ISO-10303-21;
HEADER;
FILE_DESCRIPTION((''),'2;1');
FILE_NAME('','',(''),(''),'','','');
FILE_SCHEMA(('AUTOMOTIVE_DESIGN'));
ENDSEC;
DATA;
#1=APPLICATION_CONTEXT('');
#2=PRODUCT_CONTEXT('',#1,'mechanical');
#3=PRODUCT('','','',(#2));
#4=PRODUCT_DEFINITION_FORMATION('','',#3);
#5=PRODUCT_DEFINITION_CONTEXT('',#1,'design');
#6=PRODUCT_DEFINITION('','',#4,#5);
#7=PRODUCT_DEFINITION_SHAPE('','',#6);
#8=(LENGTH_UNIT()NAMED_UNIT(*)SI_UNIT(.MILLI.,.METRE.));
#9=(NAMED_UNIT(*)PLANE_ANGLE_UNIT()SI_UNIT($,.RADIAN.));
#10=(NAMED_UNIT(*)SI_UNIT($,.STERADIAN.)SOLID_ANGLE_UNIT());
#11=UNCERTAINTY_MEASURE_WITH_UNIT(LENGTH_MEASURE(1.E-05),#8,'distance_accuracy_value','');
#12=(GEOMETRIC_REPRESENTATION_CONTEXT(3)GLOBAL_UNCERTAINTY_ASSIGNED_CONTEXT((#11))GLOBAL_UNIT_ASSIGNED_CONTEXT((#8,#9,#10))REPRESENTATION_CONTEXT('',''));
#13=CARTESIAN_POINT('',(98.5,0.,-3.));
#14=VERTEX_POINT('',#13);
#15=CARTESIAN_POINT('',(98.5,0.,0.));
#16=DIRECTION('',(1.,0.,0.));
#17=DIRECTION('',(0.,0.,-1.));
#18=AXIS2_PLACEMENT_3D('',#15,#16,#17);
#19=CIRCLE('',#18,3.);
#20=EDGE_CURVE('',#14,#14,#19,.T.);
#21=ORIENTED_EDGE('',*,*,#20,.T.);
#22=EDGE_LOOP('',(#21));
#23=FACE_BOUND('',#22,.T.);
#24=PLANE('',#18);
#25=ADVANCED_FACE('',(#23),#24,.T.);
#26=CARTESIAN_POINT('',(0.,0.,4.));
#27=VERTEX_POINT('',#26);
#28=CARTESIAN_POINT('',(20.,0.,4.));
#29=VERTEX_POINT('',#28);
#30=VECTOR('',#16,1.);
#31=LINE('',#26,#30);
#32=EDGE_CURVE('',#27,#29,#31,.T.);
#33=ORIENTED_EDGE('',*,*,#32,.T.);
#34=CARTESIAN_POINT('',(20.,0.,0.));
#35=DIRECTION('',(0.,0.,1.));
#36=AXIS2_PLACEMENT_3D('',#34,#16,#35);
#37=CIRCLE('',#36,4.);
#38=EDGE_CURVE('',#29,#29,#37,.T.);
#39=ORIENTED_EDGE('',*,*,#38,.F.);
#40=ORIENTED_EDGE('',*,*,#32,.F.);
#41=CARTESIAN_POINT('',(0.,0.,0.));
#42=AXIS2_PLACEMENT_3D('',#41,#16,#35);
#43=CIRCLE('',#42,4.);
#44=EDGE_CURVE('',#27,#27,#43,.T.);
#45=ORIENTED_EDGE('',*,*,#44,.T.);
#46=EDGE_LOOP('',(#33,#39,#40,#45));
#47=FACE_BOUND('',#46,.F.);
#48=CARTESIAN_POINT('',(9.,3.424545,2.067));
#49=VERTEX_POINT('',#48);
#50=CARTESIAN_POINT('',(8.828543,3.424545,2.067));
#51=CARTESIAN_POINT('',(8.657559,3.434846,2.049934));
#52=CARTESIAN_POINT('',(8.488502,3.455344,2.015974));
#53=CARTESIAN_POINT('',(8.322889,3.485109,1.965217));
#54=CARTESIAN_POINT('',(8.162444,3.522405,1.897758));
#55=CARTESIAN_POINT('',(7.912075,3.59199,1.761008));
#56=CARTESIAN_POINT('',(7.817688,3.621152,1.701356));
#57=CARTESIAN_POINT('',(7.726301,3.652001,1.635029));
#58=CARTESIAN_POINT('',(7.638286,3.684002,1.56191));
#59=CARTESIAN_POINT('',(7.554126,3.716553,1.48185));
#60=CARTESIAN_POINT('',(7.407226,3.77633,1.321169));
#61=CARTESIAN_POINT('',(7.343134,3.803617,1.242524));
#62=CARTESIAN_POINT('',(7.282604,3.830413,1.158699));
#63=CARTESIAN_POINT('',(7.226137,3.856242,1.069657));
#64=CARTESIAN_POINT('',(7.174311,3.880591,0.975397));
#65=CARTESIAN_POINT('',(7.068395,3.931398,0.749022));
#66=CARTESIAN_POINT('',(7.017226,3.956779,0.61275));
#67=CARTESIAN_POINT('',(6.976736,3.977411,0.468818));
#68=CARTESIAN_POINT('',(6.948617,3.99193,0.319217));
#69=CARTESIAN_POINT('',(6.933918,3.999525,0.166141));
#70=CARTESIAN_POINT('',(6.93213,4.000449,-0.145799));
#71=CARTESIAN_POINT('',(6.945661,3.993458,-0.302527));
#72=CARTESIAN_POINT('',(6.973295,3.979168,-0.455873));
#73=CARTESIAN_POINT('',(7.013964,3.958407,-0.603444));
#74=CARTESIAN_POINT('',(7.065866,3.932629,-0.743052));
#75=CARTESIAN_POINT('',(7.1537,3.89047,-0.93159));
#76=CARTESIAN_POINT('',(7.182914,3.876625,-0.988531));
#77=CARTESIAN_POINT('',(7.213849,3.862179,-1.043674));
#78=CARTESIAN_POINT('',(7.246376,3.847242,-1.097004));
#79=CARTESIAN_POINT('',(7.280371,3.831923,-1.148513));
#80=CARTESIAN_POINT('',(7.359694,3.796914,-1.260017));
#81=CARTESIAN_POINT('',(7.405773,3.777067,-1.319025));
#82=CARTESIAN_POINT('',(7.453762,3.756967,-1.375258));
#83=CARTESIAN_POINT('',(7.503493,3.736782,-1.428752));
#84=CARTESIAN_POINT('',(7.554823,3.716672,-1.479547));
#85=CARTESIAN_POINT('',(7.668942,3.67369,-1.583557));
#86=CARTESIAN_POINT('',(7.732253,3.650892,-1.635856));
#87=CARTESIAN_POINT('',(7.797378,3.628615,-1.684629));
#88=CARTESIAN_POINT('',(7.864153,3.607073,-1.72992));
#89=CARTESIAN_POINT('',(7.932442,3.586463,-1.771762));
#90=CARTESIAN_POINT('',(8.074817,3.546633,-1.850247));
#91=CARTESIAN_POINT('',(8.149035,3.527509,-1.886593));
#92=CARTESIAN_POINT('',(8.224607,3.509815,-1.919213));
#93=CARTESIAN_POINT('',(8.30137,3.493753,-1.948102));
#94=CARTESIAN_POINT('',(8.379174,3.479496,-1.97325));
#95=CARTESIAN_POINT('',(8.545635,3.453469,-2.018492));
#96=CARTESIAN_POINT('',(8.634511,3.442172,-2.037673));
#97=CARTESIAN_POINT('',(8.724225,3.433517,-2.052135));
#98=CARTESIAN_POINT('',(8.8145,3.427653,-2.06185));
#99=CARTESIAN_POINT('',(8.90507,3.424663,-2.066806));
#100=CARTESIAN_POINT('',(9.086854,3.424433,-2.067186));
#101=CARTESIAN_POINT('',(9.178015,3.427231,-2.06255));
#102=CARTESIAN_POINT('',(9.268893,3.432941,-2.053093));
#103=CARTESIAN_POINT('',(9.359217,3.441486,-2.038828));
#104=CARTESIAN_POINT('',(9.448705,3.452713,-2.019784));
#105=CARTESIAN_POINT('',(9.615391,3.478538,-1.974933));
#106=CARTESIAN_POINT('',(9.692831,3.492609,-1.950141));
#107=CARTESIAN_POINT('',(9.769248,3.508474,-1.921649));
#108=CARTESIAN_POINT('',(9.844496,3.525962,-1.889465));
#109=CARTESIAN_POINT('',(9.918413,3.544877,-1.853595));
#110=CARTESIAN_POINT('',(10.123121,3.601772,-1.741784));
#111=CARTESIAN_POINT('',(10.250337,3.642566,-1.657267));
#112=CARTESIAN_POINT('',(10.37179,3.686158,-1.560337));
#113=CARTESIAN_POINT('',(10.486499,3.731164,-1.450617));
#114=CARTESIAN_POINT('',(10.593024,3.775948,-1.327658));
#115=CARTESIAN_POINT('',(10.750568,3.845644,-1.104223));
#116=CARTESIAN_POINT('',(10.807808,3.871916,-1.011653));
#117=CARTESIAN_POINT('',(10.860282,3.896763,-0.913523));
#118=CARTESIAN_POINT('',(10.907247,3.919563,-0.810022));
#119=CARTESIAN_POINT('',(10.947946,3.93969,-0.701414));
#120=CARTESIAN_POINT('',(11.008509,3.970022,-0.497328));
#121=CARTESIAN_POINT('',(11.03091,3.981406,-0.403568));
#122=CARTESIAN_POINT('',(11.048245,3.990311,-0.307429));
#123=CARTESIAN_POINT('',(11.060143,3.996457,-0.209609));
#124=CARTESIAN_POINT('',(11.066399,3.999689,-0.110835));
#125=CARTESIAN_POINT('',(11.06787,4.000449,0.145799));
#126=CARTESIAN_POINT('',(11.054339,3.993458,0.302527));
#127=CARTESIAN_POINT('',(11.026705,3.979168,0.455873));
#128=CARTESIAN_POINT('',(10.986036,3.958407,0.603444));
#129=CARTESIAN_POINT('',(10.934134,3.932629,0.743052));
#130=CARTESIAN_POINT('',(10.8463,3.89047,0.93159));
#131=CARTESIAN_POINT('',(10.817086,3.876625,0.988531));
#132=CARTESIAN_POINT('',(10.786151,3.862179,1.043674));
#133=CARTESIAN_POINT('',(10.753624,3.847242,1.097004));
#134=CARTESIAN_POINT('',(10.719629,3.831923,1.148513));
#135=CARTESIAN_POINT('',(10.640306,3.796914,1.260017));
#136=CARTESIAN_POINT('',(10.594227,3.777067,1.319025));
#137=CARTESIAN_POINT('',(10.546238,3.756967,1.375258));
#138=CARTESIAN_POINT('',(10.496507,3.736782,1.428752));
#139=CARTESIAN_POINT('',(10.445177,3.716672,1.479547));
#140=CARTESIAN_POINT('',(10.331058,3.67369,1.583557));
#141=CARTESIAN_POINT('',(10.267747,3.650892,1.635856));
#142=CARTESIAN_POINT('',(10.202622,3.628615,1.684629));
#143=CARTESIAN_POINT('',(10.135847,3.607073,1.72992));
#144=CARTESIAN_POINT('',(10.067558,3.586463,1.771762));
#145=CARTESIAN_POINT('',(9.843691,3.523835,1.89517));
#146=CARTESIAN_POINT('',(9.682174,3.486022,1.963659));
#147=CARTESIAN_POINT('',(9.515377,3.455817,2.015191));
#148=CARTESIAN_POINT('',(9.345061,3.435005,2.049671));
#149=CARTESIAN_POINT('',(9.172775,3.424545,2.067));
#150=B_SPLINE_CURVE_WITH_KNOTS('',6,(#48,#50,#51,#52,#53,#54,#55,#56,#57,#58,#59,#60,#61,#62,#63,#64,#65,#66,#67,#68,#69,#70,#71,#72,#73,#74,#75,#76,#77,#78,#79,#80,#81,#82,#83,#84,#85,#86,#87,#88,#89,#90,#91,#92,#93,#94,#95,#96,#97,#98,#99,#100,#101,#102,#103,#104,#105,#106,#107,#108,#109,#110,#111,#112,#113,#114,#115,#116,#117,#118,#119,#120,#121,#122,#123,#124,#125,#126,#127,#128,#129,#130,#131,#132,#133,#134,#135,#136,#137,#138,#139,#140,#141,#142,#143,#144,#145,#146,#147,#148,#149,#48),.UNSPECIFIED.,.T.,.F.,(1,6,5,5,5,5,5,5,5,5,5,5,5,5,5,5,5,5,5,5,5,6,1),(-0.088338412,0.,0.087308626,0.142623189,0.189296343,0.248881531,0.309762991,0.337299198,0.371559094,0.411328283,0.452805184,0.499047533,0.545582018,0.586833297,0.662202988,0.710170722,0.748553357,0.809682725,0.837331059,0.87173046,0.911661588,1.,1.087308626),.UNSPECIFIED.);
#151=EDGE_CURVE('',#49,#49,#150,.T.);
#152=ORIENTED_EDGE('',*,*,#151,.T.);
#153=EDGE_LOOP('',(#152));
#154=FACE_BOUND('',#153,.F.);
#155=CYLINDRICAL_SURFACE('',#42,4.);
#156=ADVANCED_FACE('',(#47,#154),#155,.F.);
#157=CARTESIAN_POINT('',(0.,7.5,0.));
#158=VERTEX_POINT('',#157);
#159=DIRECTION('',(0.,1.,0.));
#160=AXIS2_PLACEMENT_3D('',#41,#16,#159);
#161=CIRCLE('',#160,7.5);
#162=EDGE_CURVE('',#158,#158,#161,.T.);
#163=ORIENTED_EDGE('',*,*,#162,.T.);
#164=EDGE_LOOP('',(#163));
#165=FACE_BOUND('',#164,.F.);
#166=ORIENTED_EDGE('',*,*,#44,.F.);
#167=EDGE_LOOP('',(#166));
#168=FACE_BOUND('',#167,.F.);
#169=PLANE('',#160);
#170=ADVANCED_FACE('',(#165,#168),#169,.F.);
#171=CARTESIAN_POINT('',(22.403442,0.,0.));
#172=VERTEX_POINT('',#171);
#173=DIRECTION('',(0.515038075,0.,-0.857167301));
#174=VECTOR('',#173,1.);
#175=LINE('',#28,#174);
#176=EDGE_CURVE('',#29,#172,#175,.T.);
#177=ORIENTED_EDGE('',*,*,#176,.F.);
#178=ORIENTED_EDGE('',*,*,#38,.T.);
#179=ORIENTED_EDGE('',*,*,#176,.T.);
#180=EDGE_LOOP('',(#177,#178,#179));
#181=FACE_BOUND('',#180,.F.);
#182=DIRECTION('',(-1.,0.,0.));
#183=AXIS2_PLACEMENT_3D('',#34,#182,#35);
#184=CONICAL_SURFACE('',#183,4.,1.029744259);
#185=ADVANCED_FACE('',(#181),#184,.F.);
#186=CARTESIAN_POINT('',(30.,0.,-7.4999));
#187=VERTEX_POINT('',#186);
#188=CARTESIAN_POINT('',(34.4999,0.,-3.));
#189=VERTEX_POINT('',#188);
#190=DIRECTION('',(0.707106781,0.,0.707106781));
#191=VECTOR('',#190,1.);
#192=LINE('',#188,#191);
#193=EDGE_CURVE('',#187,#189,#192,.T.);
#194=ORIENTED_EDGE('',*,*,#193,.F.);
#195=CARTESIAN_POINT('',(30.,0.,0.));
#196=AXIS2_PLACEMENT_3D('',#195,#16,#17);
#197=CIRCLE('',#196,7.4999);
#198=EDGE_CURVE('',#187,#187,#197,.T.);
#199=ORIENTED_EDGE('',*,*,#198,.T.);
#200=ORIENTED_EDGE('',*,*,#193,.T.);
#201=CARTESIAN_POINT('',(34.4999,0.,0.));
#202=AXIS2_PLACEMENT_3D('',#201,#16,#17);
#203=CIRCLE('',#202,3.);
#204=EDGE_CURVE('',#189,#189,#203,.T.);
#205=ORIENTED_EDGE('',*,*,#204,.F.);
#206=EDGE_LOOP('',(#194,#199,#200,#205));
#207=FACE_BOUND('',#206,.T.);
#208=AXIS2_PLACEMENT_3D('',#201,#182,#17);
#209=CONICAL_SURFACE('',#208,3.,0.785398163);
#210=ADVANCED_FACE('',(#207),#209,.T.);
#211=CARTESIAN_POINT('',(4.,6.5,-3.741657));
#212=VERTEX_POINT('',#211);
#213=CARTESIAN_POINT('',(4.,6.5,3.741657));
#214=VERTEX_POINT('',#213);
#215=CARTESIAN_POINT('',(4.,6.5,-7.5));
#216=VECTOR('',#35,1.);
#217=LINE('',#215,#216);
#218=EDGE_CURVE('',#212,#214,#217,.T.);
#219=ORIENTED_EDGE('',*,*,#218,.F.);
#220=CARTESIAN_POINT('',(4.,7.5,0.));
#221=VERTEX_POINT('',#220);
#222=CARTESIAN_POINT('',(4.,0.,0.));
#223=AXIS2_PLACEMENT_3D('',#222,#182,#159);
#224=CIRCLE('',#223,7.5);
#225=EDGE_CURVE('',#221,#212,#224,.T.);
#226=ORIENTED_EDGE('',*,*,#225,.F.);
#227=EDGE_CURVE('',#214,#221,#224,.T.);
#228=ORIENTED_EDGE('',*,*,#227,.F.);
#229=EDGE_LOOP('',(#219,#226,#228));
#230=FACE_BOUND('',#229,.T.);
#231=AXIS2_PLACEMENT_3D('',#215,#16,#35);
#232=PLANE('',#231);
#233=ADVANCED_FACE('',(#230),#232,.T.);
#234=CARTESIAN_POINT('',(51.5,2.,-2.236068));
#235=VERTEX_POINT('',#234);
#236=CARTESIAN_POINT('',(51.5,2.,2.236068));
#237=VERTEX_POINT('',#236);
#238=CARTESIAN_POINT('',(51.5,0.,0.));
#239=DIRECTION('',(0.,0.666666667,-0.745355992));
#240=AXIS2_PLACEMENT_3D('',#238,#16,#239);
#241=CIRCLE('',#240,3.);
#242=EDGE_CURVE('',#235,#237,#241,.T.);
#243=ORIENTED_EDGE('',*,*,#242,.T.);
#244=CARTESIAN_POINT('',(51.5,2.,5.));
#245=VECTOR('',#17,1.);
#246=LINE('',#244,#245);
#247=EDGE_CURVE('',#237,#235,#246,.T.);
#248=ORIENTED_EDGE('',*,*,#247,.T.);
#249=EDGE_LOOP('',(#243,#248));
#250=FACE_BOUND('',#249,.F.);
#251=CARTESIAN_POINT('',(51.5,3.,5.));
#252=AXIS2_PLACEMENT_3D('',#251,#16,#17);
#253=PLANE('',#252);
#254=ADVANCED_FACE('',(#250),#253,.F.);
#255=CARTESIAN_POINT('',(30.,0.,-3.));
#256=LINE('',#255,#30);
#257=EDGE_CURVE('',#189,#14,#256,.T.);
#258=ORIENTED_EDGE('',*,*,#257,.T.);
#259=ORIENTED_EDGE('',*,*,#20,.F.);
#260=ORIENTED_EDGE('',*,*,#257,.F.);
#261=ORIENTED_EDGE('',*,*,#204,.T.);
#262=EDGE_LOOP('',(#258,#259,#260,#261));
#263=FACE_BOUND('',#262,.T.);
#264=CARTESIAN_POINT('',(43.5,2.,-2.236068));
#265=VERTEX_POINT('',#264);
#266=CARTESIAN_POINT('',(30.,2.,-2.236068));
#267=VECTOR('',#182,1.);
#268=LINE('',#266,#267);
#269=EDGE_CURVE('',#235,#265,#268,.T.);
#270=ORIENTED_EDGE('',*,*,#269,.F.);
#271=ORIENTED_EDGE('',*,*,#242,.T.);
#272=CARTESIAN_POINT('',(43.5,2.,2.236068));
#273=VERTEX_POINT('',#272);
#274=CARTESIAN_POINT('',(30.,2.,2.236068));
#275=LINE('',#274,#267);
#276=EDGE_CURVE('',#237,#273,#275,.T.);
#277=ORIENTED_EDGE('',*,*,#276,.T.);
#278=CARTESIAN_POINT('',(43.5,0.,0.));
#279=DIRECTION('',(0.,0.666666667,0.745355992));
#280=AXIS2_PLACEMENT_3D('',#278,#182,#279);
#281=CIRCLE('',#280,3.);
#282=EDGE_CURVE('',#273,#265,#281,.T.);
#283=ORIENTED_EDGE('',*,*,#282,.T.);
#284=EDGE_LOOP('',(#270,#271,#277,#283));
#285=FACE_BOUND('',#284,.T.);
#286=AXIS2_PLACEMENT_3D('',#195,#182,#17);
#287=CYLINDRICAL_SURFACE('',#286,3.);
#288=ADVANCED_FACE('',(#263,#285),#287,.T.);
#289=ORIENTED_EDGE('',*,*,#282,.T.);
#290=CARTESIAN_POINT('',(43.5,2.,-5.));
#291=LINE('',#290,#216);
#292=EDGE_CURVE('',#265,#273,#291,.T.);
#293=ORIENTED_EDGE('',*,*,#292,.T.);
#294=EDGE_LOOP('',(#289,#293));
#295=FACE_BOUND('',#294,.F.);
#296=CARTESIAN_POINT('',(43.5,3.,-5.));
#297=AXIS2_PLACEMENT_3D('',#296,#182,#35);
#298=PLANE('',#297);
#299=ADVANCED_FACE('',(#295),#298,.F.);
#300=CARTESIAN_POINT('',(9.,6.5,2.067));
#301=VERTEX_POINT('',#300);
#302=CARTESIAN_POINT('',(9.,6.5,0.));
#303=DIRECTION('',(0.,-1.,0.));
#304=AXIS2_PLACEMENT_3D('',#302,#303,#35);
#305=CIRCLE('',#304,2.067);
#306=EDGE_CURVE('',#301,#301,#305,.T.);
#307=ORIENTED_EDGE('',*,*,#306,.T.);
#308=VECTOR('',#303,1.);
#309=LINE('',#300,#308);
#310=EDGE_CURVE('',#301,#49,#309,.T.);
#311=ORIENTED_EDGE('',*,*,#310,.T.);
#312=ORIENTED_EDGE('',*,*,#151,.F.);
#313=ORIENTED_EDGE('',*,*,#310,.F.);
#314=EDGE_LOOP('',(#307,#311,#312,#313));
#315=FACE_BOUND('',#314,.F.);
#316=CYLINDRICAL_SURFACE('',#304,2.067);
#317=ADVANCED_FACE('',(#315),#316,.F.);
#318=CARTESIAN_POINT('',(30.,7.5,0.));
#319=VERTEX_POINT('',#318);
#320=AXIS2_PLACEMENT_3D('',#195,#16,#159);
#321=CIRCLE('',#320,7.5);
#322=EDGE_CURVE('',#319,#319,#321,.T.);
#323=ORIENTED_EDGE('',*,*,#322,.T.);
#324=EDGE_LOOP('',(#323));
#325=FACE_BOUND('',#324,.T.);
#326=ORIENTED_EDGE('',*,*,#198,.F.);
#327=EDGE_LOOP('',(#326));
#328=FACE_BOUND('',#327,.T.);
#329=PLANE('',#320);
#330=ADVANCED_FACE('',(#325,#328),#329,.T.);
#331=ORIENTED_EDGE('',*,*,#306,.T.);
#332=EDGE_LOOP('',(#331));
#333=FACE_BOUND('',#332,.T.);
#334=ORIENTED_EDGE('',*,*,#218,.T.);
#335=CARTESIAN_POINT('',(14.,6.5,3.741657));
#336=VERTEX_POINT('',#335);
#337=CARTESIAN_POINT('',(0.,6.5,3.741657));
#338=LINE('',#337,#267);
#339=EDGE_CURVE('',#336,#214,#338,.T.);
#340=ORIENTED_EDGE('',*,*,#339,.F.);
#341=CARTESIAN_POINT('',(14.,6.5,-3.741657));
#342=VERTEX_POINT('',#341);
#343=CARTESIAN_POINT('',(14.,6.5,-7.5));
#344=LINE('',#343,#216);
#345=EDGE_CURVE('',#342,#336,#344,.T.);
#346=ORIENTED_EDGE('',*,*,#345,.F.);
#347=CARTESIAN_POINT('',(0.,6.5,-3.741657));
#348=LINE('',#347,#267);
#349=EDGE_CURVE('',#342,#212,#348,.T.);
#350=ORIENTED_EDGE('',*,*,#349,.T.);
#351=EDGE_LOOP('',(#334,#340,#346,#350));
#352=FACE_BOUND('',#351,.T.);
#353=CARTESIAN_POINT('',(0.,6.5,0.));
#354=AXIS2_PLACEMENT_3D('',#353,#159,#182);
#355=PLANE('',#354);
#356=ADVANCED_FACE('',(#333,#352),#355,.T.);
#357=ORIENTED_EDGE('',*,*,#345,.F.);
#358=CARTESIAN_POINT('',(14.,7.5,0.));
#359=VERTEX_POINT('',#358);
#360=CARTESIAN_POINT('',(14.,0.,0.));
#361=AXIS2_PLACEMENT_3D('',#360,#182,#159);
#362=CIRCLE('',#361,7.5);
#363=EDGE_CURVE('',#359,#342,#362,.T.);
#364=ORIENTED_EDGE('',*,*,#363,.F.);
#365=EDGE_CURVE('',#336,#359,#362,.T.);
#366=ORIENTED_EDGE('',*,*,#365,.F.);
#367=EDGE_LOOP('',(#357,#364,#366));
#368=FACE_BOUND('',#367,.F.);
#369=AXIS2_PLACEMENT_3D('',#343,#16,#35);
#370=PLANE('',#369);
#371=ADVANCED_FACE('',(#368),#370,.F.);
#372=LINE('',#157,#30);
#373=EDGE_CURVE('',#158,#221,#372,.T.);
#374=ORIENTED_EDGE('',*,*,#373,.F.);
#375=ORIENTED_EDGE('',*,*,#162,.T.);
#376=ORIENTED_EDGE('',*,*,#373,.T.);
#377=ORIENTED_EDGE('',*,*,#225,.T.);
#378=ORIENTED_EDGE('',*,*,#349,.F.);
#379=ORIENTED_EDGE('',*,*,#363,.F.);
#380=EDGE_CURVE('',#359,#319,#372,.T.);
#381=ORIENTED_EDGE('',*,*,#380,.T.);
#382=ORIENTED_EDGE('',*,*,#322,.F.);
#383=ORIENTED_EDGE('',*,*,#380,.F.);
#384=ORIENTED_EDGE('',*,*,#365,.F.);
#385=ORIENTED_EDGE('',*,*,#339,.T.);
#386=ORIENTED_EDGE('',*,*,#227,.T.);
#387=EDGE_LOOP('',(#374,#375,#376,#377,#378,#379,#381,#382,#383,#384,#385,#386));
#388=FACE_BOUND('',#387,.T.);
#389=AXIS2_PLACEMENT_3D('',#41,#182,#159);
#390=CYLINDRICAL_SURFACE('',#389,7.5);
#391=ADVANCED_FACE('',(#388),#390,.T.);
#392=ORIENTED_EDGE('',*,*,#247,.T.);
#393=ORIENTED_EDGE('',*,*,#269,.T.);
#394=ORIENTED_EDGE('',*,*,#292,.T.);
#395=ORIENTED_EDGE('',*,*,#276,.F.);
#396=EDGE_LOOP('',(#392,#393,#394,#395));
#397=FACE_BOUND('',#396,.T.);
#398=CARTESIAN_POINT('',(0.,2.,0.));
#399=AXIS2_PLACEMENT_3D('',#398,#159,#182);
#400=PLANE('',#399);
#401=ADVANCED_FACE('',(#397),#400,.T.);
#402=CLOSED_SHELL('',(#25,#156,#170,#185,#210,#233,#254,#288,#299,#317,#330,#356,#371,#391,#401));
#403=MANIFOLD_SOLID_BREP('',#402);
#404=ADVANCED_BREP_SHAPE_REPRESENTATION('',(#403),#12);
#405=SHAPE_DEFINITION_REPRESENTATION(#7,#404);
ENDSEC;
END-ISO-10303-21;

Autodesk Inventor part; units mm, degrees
ref_plane "YZ Plane" through (0, 0, 0) normal (1, 0, 0) x (0, 1, 0)
sketch "Skizze1" plane through (0, 0, 0) normal (1, 0, 0) x (0, 1, 0)
  circle A0 centre (0, 0) radius 7.5
  dimension "d0" = 15
extrude "Extrusion1" add sketch "Skizze1" along normal blind 30
sketch "Skizze2" plane through (30, 0, 0) normal (1, 0, 0) x (0, 0, -1)
  circle A0 centre (0, 0) radius 3
  dimension "d3" = 6
extrude "Extrusion2" add sketch "Skizze2" along normal blind 68.5
sketch "Skizze3" plane through (0, 0, 0) normal (-1, 0, 0) x (0, 0, 1)
  circle A0 centre (0, 0) radius 4
  dimension "d6" = 8
hole "Bohrung1" at (0, 0, 0) direction (1, 0, 0) diameter 8 depth 20 tip angle 118
ref_plane "Arbeitsebene1" through (0, 6.5, 0) normal (0, 1, 0) x (-1, 0, 0)
sketch "Skizze4" plane through (0, 6.5, 0) normal (0, 1, 0) x (-1, 0, 0)
  line L0 (-30, 7.5) -> (-30, -7.5) projected
  line L1 (0, -7.5) -> (0, 7.5) projected
  line L2 (0, 7.5) -> (-30, 7.5) projected
  line L3 (0, -7.5) -> (-30, -7.5) projected
  line L4 (-4, -7.5) -> (-4, 7.5)
  line L5 (-14, -7.5) -> (-14, 7.5)
  point P0 (0, 0)
  dimension "d15" = 10
  dimension "d16" = 4
extrude "Extrusion3" cut sketch "Skizze4" along normal through all contours L2 L4 L3 L5
sketch "Skizze5" plane through (0, 6.5, 0) normal (0, 1, 0) x (1, 0, 0)
  line L0 (14, -3.7417) -> (4, -3.7417) projected
  line L1 (14, -3.7417) -> (14, 3.7417) projected
  line L2 (4, 3.7417) -> (14, 3.7417) projected
  line L3 (4, 3.7417) -> (4, -3.7417) projected
  line L4 (4, 3.7417) -> (14, -3.7417)
  line L5 (4, 3.7417) -> (14, 3.7417) projected
  line L6 (14, -3.7417) -> (4, -3.7417) projected
  line L7 (14, 3.7417) -> (4, -3.7417)
  point P0 (0, 0)
  point P1 (9, 0)
hole "Bohrung2" at (9, 6.5, 0) direction (0, -1, 0) diameter 4.134 end up to surface thread size "M5x0.8" class "6H" standard "ISO Metric profile"
chamfer "Fase1" distance 4.5 angle 45 1 edges at (30, 0, 3)
ref_plane "Arbeitsebene2" through (0, 3, 0) normal (0, 1, 0) x (-1, 0, 0)
sketch "Skizze6" plane through (0, 3, 0) normal (0, 1, 0) x (-1, 0, 0)
  line L0 (-118.2, 0) -> (19.7, 0) construction
  line L1 (-43.5, 5) -> (-51.5, 5)
  line L2 (-51.5, 5) -> (-51.5, -5)
  line L3 (-51.5, -5) -> (-43.5, -5)
  line L4 (-43.5, -5) -> (-43.5, 5)
  line L5 (-43.5, 5) -> (-51.5, -5) construction
  line L6 (-51.5, 5) -> (-43.5, -5) construction
  point P0 (0, 0)
  point P1 (-47.5, 0)
  dimension "d30" = 8
  dimension "d31" = 10
  dimension "d32" = 47.5
extrude "Extrusion4" cut sketch "Skizze6" against normal blind 1
properties part number "Shaft Kupplung" material "Stahl, weich"
